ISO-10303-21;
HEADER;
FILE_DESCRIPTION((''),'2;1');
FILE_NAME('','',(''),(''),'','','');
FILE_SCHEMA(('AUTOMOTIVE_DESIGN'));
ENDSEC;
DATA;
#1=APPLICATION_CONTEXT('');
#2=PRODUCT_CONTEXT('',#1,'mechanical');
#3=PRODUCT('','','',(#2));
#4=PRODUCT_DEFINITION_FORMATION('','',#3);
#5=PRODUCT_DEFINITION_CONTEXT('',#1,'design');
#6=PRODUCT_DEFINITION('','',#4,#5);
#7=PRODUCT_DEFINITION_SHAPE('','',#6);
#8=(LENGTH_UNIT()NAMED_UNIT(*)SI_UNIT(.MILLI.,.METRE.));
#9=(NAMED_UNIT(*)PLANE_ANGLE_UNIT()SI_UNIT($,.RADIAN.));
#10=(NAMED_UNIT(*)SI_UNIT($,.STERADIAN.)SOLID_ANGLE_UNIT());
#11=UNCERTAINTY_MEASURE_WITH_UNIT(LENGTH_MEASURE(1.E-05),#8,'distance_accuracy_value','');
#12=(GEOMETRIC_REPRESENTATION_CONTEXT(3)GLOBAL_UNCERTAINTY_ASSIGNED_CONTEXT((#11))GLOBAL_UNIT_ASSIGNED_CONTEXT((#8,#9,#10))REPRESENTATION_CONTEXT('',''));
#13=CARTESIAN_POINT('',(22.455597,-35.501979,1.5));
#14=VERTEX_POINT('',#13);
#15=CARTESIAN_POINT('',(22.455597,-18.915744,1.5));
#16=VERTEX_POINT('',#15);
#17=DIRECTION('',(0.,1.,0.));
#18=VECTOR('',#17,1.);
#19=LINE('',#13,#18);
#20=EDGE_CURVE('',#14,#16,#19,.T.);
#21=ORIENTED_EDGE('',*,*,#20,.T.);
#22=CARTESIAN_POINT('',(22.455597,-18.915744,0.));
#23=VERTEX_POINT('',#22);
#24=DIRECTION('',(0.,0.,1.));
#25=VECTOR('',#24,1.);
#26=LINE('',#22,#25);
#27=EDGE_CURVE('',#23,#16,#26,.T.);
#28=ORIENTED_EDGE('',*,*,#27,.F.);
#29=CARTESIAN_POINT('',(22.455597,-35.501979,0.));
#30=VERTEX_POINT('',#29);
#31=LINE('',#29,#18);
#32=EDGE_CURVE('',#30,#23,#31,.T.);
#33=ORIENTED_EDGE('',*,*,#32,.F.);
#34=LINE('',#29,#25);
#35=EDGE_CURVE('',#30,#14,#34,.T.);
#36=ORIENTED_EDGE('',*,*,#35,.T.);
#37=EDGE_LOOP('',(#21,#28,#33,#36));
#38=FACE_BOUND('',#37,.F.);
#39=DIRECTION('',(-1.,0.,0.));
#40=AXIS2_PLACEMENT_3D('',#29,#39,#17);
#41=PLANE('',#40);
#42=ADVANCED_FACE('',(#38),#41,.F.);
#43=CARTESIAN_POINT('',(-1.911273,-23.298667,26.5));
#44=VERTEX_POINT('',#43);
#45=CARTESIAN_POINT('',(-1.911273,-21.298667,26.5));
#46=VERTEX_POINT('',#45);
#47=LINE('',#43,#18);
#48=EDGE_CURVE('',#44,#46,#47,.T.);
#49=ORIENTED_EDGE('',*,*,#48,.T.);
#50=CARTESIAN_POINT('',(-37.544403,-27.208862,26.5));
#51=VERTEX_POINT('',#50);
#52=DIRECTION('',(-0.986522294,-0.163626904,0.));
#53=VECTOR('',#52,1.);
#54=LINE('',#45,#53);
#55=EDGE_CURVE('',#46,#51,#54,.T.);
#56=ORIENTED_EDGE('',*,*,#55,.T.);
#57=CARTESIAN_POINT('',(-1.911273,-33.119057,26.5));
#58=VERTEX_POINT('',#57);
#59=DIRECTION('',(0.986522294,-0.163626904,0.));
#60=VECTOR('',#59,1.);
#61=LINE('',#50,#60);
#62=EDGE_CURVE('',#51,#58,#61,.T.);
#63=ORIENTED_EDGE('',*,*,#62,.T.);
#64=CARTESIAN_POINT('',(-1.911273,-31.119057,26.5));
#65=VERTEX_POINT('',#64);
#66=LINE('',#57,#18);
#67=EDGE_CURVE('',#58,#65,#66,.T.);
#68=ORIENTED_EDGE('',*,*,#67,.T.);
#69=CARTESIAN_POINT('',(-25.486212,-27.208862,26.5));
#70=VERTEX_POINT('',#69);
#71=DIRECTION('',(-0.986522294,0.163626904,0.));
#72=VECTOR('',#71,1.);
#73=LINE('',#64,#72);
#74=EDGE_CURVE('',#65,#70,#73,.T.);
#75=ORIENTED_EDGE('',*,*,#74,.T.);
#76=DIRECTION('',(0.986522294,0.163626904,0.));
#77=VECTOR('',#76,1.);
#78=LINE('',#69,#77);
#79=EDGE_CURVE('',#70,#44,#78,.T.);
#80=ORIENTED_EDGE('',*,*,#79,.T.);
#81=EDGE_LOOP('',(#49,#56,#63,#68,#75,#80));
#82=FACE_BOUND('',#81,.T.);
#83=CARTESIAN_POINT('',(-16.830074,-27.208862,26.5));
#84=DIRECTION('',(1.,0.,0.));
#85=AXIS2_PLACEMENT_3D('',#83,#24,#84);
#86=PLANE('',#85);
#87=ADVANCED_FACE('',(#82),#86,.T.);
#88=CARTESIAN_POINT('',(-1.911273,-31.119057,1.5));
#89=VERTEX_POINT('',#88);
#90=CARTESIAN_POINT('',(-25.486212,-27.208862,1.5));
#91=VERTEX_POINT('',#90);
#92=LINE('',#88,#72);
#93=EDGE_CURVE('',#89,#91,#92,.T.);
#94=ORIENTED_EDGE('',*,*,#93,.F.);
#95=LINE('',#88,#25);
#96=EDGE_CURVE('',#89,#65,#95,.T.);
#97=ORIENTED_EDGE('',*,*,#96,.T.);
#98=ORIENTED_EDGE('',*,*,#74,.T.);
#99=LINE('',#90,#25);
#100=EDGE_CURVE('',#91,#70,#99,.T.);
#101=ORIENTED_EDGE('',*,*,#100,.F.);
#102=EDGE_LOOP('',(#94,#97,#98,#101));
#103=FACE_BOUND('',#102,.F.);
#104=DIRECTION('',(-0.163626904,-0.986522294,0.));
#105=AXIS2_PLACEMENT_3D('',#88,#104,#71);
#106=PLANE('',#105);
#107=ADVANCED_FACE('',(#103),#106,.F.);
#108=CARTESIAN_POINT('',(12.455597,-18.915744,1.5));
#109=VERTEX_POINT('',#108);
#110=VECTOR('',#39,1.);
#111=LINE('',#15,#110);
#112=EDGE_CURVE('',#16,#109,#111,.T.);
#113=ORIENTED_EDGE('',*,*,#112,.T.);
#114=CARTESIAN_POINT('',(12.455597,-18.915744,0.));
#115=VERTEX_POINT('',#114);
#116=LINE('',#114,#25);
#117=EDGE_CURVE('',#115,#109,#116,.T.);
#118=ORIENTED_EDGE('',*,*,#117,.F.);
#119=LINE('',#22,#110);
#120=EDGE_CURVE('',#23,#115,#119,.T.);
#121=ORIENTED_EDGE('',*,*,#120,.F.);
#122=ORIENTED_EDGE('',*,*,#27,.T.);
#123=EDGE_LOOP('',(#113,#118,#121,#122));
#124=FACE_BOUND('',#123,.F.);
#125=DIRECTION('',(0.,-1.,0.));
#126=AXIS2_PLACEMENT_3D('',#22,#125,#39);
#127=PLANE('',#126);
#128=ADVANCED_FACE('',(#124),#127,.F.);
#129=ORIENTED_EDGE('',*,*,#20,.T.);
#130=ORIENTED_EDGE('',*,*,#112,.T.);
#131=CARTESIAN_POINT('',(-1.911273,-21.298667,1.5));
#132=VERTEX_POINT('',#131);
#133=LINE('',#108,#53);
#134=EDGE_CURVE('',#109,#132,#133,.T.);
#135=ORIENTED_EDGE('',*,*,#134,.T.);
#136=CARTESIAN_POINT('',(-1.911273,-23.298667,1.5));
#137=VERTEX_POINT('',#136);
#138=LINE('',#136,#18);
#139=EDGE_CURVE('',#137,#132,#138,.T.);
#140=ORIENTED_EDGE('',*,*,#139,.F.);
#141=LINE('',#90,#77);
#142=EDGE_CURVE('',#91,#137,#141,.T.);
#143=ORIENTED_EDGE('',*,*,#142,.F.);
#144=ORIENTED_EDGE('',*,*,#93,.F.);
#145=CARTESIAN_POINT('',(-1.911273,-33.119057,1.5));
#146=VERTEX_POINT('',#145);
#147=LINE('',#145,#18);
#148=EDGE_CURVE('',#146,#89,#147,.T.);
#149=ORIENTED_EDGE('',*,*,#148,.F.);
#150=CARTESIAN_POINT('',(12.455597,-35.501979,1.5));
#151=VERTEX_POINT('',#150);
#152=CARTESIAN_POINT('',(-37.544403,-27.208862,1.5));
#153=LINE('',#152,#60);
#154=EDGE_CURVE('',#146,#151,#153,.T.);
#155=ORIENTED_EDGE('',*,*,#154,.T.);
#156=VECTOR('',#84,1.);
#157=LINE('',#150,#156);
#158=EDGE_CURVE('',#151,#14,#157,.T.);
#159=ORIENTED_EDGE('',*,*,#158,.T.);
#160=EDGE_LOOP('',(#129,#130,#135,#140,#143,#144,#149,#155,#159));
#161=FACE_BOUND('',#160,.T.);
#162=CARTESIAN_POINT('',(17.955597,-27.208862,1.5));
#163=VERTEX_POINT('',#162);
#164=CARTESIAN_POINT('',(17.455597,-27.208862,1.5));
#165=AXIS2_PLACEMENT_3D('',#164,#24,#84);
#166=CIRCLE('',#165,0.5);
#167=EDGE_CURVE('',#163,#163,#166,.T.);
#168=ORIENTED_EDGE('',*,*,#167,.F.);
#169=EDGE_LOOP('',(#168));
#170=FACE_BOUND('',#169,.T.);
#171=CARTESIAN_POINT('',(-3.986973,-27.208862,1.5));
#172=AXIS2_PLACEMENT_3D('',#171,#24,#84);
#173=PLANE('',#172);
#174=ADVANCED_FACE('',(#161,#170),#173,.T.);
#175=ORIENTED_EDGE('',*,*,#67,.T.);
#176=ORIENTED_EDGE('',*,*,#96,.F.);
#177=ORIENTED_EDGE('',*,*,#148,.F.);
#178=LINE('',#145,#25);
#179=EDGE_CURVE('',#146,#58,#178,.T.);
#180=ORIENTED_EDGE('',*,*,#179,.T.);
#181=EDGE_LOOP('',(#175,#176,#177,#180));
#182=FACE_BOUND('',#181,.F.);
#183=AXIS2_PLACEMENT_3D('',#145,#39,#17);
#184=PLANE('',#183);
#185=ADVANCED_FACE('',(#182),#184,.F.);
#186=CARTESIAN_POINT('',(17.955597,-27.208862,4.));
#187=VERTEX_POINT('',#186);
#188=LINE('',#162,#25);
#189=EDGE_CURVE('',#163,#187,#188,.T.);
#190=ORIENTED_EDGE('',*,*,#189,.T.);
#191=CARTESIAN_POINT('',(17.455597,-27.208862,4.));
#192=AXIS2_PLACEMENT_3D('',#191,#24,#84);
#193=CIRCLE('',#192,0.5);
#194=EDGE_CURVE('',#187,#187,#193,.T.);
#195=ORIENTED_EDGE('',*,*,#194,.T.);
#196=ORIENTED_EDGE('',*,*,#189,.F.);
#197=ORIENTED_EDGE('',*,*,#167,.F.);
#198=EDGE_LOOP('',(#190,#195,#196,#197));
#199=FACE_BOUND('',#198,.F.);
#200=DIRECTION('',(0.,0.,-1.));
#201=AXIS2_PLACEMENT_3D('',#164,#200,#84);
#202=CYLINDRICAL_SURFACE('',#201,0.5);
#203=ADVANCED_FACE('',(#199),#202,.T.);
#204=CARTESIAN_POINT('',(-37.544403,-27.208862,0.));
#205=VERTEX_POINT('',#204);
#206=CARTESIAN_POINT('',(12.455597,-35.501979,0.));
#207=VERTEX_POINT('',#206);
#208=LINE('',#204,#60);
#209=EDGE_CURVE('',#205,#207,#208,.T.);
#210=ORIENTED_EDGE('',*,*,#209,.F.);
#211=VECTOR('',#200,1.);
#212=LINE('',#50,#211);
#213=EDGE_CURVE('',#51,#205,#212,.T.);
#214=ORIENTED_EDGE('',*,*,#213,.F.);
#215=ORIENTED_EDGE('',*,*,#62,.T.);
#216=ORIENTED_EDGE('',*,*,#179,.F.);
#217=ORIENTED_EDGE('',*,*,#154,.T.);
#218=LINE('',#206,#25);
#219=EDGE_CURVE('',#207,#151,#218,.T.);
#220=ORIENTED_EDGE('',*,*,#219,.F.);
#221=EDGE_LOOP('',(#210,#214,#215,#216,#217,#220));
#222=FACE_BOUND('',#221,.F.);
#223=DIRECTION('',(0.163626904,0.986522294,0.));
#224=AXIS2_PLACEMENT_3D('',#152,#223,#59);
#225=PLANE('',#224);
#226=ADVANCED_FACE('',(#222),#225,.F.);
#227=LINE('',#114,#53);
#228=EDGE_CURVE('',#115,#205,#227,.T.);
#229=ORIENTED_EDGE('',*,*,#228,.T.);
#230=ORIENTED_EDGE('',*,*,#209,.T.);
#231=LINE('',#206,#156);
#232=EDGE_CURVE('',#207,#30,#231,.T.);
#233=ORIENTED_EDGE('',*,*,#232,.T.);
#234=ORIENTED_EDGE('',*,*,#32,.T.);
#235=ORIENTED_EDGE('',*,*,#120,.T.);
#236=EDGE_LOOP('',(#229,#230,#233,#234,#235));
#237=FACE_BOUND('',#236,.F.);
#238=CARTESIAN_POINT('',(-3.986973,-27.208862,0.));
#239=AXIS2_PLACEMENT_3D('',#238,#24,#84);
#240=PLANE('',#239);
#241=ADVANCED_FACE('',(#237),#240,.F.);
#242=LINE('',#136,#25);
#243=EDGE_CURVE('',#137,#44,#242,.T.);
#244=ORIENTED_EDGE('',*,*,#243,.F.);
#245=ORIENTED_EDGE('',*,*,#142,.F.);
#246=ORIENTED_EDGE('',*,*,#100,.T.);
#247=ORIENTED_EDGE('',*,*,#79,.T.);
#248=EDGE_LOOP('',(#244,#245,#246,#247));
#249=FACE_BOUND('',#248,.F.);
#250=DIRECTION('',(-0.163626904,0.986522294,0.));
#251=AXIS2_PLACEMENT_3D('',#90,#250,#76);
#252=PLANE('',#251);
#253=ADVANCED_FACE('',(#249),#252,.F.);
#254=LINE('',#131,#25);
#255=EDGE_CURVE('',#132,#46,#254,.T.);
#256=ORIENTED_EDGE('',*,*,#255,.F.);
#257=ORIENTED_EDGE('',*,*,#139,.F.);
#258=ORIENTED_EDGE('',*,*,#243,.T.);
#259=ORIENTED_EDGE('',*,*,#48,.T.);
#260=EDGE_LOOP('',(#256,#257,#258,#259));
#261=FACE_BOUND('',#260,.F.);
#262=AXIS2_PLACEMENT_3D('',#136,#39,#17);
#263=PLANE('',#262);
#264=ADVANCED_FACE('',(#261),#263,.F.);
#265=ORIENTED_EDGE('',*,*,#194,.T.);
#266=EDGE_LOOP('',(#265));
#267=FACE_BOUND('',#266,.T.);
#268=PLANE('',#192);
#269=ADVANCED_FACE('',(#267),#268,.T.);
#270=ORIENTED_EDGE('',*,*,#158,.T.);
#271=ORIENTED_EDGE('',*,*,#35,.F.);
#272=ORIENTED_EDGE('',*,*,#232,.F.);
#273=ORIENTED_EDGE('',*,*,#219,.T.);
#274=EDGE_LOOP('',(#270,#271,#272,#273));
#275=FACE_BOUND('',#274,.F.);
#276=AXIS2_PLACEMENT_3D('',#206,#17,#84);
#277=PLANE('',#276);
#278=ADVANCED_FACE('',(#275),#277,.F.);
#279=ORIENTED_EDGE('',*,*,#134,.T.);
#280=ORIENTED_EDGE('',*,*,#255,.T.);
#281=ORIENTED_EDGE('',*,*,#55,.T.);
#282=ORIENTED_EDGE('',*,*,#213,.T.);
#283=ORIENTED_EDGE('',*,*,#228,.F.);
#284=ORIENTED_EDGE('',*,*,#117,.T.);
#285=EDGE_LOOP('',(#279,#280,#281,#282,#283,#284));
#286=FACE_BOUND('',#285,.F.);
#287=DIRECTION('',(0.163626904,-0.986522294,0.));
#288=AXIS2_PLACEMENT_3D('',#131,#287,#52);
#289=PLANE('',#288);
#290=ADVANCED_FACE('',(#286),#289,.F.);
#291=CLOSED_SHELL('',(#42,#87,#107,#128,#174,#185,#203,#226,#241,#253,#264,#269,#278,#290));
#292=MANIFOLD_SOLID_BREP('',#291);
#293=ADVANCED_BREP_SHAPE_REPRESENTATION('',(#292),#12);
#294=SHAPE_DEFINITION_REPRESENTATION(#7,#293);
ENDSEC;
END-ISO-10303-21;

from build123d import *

# Parameters (mm, degrees)
F1_DEPTH = 1.5
F3_DEPTH = 25
F4_R     = 0.5
F5_DEPTH = 2.5


# Not quite as in the source:
# - a feature names something its author has since deleted; it is built from what else it names


with BuildPart() as f1:
    # F0 (on Top) → F1 (new body)
    with BuildSketch(Plane.XY):
        Polygon((-37.5444034434, -27.2088618949), (12.4555965566, -35.5019792914), (22.4555965566, -35.5019792914), (22.4555965566, -18.9157444984), (12.4555965566, -18.9157444984), align=None)
    extrude(amount=F1_DEPTH)

    # F2 (on face) → F3 (join)
    with BuildSketch(Plane.XY.offset(1.5)):
        Polygon((-37.5444034434, -27.2088618949), (-1.9112733802, -33.1190565113), (-1.9112733802, -31.1190565113), (-25.486211666, -27.2088618949), (-1.9112733802, -23.2986672785), (-1.9112733802, -21.2986672785), align=None)
    extrude(amount=F3_DEPTH)

    # F4 (on face) → F5 (join)
    with BuildSketch(Plane.XY.offset(1.5)):
        with Locations((17.4555965566, -27.2088618949)):
            Circle(F4_R)
    extrude(amount=F5_DEPTH)


solid = f1.part
